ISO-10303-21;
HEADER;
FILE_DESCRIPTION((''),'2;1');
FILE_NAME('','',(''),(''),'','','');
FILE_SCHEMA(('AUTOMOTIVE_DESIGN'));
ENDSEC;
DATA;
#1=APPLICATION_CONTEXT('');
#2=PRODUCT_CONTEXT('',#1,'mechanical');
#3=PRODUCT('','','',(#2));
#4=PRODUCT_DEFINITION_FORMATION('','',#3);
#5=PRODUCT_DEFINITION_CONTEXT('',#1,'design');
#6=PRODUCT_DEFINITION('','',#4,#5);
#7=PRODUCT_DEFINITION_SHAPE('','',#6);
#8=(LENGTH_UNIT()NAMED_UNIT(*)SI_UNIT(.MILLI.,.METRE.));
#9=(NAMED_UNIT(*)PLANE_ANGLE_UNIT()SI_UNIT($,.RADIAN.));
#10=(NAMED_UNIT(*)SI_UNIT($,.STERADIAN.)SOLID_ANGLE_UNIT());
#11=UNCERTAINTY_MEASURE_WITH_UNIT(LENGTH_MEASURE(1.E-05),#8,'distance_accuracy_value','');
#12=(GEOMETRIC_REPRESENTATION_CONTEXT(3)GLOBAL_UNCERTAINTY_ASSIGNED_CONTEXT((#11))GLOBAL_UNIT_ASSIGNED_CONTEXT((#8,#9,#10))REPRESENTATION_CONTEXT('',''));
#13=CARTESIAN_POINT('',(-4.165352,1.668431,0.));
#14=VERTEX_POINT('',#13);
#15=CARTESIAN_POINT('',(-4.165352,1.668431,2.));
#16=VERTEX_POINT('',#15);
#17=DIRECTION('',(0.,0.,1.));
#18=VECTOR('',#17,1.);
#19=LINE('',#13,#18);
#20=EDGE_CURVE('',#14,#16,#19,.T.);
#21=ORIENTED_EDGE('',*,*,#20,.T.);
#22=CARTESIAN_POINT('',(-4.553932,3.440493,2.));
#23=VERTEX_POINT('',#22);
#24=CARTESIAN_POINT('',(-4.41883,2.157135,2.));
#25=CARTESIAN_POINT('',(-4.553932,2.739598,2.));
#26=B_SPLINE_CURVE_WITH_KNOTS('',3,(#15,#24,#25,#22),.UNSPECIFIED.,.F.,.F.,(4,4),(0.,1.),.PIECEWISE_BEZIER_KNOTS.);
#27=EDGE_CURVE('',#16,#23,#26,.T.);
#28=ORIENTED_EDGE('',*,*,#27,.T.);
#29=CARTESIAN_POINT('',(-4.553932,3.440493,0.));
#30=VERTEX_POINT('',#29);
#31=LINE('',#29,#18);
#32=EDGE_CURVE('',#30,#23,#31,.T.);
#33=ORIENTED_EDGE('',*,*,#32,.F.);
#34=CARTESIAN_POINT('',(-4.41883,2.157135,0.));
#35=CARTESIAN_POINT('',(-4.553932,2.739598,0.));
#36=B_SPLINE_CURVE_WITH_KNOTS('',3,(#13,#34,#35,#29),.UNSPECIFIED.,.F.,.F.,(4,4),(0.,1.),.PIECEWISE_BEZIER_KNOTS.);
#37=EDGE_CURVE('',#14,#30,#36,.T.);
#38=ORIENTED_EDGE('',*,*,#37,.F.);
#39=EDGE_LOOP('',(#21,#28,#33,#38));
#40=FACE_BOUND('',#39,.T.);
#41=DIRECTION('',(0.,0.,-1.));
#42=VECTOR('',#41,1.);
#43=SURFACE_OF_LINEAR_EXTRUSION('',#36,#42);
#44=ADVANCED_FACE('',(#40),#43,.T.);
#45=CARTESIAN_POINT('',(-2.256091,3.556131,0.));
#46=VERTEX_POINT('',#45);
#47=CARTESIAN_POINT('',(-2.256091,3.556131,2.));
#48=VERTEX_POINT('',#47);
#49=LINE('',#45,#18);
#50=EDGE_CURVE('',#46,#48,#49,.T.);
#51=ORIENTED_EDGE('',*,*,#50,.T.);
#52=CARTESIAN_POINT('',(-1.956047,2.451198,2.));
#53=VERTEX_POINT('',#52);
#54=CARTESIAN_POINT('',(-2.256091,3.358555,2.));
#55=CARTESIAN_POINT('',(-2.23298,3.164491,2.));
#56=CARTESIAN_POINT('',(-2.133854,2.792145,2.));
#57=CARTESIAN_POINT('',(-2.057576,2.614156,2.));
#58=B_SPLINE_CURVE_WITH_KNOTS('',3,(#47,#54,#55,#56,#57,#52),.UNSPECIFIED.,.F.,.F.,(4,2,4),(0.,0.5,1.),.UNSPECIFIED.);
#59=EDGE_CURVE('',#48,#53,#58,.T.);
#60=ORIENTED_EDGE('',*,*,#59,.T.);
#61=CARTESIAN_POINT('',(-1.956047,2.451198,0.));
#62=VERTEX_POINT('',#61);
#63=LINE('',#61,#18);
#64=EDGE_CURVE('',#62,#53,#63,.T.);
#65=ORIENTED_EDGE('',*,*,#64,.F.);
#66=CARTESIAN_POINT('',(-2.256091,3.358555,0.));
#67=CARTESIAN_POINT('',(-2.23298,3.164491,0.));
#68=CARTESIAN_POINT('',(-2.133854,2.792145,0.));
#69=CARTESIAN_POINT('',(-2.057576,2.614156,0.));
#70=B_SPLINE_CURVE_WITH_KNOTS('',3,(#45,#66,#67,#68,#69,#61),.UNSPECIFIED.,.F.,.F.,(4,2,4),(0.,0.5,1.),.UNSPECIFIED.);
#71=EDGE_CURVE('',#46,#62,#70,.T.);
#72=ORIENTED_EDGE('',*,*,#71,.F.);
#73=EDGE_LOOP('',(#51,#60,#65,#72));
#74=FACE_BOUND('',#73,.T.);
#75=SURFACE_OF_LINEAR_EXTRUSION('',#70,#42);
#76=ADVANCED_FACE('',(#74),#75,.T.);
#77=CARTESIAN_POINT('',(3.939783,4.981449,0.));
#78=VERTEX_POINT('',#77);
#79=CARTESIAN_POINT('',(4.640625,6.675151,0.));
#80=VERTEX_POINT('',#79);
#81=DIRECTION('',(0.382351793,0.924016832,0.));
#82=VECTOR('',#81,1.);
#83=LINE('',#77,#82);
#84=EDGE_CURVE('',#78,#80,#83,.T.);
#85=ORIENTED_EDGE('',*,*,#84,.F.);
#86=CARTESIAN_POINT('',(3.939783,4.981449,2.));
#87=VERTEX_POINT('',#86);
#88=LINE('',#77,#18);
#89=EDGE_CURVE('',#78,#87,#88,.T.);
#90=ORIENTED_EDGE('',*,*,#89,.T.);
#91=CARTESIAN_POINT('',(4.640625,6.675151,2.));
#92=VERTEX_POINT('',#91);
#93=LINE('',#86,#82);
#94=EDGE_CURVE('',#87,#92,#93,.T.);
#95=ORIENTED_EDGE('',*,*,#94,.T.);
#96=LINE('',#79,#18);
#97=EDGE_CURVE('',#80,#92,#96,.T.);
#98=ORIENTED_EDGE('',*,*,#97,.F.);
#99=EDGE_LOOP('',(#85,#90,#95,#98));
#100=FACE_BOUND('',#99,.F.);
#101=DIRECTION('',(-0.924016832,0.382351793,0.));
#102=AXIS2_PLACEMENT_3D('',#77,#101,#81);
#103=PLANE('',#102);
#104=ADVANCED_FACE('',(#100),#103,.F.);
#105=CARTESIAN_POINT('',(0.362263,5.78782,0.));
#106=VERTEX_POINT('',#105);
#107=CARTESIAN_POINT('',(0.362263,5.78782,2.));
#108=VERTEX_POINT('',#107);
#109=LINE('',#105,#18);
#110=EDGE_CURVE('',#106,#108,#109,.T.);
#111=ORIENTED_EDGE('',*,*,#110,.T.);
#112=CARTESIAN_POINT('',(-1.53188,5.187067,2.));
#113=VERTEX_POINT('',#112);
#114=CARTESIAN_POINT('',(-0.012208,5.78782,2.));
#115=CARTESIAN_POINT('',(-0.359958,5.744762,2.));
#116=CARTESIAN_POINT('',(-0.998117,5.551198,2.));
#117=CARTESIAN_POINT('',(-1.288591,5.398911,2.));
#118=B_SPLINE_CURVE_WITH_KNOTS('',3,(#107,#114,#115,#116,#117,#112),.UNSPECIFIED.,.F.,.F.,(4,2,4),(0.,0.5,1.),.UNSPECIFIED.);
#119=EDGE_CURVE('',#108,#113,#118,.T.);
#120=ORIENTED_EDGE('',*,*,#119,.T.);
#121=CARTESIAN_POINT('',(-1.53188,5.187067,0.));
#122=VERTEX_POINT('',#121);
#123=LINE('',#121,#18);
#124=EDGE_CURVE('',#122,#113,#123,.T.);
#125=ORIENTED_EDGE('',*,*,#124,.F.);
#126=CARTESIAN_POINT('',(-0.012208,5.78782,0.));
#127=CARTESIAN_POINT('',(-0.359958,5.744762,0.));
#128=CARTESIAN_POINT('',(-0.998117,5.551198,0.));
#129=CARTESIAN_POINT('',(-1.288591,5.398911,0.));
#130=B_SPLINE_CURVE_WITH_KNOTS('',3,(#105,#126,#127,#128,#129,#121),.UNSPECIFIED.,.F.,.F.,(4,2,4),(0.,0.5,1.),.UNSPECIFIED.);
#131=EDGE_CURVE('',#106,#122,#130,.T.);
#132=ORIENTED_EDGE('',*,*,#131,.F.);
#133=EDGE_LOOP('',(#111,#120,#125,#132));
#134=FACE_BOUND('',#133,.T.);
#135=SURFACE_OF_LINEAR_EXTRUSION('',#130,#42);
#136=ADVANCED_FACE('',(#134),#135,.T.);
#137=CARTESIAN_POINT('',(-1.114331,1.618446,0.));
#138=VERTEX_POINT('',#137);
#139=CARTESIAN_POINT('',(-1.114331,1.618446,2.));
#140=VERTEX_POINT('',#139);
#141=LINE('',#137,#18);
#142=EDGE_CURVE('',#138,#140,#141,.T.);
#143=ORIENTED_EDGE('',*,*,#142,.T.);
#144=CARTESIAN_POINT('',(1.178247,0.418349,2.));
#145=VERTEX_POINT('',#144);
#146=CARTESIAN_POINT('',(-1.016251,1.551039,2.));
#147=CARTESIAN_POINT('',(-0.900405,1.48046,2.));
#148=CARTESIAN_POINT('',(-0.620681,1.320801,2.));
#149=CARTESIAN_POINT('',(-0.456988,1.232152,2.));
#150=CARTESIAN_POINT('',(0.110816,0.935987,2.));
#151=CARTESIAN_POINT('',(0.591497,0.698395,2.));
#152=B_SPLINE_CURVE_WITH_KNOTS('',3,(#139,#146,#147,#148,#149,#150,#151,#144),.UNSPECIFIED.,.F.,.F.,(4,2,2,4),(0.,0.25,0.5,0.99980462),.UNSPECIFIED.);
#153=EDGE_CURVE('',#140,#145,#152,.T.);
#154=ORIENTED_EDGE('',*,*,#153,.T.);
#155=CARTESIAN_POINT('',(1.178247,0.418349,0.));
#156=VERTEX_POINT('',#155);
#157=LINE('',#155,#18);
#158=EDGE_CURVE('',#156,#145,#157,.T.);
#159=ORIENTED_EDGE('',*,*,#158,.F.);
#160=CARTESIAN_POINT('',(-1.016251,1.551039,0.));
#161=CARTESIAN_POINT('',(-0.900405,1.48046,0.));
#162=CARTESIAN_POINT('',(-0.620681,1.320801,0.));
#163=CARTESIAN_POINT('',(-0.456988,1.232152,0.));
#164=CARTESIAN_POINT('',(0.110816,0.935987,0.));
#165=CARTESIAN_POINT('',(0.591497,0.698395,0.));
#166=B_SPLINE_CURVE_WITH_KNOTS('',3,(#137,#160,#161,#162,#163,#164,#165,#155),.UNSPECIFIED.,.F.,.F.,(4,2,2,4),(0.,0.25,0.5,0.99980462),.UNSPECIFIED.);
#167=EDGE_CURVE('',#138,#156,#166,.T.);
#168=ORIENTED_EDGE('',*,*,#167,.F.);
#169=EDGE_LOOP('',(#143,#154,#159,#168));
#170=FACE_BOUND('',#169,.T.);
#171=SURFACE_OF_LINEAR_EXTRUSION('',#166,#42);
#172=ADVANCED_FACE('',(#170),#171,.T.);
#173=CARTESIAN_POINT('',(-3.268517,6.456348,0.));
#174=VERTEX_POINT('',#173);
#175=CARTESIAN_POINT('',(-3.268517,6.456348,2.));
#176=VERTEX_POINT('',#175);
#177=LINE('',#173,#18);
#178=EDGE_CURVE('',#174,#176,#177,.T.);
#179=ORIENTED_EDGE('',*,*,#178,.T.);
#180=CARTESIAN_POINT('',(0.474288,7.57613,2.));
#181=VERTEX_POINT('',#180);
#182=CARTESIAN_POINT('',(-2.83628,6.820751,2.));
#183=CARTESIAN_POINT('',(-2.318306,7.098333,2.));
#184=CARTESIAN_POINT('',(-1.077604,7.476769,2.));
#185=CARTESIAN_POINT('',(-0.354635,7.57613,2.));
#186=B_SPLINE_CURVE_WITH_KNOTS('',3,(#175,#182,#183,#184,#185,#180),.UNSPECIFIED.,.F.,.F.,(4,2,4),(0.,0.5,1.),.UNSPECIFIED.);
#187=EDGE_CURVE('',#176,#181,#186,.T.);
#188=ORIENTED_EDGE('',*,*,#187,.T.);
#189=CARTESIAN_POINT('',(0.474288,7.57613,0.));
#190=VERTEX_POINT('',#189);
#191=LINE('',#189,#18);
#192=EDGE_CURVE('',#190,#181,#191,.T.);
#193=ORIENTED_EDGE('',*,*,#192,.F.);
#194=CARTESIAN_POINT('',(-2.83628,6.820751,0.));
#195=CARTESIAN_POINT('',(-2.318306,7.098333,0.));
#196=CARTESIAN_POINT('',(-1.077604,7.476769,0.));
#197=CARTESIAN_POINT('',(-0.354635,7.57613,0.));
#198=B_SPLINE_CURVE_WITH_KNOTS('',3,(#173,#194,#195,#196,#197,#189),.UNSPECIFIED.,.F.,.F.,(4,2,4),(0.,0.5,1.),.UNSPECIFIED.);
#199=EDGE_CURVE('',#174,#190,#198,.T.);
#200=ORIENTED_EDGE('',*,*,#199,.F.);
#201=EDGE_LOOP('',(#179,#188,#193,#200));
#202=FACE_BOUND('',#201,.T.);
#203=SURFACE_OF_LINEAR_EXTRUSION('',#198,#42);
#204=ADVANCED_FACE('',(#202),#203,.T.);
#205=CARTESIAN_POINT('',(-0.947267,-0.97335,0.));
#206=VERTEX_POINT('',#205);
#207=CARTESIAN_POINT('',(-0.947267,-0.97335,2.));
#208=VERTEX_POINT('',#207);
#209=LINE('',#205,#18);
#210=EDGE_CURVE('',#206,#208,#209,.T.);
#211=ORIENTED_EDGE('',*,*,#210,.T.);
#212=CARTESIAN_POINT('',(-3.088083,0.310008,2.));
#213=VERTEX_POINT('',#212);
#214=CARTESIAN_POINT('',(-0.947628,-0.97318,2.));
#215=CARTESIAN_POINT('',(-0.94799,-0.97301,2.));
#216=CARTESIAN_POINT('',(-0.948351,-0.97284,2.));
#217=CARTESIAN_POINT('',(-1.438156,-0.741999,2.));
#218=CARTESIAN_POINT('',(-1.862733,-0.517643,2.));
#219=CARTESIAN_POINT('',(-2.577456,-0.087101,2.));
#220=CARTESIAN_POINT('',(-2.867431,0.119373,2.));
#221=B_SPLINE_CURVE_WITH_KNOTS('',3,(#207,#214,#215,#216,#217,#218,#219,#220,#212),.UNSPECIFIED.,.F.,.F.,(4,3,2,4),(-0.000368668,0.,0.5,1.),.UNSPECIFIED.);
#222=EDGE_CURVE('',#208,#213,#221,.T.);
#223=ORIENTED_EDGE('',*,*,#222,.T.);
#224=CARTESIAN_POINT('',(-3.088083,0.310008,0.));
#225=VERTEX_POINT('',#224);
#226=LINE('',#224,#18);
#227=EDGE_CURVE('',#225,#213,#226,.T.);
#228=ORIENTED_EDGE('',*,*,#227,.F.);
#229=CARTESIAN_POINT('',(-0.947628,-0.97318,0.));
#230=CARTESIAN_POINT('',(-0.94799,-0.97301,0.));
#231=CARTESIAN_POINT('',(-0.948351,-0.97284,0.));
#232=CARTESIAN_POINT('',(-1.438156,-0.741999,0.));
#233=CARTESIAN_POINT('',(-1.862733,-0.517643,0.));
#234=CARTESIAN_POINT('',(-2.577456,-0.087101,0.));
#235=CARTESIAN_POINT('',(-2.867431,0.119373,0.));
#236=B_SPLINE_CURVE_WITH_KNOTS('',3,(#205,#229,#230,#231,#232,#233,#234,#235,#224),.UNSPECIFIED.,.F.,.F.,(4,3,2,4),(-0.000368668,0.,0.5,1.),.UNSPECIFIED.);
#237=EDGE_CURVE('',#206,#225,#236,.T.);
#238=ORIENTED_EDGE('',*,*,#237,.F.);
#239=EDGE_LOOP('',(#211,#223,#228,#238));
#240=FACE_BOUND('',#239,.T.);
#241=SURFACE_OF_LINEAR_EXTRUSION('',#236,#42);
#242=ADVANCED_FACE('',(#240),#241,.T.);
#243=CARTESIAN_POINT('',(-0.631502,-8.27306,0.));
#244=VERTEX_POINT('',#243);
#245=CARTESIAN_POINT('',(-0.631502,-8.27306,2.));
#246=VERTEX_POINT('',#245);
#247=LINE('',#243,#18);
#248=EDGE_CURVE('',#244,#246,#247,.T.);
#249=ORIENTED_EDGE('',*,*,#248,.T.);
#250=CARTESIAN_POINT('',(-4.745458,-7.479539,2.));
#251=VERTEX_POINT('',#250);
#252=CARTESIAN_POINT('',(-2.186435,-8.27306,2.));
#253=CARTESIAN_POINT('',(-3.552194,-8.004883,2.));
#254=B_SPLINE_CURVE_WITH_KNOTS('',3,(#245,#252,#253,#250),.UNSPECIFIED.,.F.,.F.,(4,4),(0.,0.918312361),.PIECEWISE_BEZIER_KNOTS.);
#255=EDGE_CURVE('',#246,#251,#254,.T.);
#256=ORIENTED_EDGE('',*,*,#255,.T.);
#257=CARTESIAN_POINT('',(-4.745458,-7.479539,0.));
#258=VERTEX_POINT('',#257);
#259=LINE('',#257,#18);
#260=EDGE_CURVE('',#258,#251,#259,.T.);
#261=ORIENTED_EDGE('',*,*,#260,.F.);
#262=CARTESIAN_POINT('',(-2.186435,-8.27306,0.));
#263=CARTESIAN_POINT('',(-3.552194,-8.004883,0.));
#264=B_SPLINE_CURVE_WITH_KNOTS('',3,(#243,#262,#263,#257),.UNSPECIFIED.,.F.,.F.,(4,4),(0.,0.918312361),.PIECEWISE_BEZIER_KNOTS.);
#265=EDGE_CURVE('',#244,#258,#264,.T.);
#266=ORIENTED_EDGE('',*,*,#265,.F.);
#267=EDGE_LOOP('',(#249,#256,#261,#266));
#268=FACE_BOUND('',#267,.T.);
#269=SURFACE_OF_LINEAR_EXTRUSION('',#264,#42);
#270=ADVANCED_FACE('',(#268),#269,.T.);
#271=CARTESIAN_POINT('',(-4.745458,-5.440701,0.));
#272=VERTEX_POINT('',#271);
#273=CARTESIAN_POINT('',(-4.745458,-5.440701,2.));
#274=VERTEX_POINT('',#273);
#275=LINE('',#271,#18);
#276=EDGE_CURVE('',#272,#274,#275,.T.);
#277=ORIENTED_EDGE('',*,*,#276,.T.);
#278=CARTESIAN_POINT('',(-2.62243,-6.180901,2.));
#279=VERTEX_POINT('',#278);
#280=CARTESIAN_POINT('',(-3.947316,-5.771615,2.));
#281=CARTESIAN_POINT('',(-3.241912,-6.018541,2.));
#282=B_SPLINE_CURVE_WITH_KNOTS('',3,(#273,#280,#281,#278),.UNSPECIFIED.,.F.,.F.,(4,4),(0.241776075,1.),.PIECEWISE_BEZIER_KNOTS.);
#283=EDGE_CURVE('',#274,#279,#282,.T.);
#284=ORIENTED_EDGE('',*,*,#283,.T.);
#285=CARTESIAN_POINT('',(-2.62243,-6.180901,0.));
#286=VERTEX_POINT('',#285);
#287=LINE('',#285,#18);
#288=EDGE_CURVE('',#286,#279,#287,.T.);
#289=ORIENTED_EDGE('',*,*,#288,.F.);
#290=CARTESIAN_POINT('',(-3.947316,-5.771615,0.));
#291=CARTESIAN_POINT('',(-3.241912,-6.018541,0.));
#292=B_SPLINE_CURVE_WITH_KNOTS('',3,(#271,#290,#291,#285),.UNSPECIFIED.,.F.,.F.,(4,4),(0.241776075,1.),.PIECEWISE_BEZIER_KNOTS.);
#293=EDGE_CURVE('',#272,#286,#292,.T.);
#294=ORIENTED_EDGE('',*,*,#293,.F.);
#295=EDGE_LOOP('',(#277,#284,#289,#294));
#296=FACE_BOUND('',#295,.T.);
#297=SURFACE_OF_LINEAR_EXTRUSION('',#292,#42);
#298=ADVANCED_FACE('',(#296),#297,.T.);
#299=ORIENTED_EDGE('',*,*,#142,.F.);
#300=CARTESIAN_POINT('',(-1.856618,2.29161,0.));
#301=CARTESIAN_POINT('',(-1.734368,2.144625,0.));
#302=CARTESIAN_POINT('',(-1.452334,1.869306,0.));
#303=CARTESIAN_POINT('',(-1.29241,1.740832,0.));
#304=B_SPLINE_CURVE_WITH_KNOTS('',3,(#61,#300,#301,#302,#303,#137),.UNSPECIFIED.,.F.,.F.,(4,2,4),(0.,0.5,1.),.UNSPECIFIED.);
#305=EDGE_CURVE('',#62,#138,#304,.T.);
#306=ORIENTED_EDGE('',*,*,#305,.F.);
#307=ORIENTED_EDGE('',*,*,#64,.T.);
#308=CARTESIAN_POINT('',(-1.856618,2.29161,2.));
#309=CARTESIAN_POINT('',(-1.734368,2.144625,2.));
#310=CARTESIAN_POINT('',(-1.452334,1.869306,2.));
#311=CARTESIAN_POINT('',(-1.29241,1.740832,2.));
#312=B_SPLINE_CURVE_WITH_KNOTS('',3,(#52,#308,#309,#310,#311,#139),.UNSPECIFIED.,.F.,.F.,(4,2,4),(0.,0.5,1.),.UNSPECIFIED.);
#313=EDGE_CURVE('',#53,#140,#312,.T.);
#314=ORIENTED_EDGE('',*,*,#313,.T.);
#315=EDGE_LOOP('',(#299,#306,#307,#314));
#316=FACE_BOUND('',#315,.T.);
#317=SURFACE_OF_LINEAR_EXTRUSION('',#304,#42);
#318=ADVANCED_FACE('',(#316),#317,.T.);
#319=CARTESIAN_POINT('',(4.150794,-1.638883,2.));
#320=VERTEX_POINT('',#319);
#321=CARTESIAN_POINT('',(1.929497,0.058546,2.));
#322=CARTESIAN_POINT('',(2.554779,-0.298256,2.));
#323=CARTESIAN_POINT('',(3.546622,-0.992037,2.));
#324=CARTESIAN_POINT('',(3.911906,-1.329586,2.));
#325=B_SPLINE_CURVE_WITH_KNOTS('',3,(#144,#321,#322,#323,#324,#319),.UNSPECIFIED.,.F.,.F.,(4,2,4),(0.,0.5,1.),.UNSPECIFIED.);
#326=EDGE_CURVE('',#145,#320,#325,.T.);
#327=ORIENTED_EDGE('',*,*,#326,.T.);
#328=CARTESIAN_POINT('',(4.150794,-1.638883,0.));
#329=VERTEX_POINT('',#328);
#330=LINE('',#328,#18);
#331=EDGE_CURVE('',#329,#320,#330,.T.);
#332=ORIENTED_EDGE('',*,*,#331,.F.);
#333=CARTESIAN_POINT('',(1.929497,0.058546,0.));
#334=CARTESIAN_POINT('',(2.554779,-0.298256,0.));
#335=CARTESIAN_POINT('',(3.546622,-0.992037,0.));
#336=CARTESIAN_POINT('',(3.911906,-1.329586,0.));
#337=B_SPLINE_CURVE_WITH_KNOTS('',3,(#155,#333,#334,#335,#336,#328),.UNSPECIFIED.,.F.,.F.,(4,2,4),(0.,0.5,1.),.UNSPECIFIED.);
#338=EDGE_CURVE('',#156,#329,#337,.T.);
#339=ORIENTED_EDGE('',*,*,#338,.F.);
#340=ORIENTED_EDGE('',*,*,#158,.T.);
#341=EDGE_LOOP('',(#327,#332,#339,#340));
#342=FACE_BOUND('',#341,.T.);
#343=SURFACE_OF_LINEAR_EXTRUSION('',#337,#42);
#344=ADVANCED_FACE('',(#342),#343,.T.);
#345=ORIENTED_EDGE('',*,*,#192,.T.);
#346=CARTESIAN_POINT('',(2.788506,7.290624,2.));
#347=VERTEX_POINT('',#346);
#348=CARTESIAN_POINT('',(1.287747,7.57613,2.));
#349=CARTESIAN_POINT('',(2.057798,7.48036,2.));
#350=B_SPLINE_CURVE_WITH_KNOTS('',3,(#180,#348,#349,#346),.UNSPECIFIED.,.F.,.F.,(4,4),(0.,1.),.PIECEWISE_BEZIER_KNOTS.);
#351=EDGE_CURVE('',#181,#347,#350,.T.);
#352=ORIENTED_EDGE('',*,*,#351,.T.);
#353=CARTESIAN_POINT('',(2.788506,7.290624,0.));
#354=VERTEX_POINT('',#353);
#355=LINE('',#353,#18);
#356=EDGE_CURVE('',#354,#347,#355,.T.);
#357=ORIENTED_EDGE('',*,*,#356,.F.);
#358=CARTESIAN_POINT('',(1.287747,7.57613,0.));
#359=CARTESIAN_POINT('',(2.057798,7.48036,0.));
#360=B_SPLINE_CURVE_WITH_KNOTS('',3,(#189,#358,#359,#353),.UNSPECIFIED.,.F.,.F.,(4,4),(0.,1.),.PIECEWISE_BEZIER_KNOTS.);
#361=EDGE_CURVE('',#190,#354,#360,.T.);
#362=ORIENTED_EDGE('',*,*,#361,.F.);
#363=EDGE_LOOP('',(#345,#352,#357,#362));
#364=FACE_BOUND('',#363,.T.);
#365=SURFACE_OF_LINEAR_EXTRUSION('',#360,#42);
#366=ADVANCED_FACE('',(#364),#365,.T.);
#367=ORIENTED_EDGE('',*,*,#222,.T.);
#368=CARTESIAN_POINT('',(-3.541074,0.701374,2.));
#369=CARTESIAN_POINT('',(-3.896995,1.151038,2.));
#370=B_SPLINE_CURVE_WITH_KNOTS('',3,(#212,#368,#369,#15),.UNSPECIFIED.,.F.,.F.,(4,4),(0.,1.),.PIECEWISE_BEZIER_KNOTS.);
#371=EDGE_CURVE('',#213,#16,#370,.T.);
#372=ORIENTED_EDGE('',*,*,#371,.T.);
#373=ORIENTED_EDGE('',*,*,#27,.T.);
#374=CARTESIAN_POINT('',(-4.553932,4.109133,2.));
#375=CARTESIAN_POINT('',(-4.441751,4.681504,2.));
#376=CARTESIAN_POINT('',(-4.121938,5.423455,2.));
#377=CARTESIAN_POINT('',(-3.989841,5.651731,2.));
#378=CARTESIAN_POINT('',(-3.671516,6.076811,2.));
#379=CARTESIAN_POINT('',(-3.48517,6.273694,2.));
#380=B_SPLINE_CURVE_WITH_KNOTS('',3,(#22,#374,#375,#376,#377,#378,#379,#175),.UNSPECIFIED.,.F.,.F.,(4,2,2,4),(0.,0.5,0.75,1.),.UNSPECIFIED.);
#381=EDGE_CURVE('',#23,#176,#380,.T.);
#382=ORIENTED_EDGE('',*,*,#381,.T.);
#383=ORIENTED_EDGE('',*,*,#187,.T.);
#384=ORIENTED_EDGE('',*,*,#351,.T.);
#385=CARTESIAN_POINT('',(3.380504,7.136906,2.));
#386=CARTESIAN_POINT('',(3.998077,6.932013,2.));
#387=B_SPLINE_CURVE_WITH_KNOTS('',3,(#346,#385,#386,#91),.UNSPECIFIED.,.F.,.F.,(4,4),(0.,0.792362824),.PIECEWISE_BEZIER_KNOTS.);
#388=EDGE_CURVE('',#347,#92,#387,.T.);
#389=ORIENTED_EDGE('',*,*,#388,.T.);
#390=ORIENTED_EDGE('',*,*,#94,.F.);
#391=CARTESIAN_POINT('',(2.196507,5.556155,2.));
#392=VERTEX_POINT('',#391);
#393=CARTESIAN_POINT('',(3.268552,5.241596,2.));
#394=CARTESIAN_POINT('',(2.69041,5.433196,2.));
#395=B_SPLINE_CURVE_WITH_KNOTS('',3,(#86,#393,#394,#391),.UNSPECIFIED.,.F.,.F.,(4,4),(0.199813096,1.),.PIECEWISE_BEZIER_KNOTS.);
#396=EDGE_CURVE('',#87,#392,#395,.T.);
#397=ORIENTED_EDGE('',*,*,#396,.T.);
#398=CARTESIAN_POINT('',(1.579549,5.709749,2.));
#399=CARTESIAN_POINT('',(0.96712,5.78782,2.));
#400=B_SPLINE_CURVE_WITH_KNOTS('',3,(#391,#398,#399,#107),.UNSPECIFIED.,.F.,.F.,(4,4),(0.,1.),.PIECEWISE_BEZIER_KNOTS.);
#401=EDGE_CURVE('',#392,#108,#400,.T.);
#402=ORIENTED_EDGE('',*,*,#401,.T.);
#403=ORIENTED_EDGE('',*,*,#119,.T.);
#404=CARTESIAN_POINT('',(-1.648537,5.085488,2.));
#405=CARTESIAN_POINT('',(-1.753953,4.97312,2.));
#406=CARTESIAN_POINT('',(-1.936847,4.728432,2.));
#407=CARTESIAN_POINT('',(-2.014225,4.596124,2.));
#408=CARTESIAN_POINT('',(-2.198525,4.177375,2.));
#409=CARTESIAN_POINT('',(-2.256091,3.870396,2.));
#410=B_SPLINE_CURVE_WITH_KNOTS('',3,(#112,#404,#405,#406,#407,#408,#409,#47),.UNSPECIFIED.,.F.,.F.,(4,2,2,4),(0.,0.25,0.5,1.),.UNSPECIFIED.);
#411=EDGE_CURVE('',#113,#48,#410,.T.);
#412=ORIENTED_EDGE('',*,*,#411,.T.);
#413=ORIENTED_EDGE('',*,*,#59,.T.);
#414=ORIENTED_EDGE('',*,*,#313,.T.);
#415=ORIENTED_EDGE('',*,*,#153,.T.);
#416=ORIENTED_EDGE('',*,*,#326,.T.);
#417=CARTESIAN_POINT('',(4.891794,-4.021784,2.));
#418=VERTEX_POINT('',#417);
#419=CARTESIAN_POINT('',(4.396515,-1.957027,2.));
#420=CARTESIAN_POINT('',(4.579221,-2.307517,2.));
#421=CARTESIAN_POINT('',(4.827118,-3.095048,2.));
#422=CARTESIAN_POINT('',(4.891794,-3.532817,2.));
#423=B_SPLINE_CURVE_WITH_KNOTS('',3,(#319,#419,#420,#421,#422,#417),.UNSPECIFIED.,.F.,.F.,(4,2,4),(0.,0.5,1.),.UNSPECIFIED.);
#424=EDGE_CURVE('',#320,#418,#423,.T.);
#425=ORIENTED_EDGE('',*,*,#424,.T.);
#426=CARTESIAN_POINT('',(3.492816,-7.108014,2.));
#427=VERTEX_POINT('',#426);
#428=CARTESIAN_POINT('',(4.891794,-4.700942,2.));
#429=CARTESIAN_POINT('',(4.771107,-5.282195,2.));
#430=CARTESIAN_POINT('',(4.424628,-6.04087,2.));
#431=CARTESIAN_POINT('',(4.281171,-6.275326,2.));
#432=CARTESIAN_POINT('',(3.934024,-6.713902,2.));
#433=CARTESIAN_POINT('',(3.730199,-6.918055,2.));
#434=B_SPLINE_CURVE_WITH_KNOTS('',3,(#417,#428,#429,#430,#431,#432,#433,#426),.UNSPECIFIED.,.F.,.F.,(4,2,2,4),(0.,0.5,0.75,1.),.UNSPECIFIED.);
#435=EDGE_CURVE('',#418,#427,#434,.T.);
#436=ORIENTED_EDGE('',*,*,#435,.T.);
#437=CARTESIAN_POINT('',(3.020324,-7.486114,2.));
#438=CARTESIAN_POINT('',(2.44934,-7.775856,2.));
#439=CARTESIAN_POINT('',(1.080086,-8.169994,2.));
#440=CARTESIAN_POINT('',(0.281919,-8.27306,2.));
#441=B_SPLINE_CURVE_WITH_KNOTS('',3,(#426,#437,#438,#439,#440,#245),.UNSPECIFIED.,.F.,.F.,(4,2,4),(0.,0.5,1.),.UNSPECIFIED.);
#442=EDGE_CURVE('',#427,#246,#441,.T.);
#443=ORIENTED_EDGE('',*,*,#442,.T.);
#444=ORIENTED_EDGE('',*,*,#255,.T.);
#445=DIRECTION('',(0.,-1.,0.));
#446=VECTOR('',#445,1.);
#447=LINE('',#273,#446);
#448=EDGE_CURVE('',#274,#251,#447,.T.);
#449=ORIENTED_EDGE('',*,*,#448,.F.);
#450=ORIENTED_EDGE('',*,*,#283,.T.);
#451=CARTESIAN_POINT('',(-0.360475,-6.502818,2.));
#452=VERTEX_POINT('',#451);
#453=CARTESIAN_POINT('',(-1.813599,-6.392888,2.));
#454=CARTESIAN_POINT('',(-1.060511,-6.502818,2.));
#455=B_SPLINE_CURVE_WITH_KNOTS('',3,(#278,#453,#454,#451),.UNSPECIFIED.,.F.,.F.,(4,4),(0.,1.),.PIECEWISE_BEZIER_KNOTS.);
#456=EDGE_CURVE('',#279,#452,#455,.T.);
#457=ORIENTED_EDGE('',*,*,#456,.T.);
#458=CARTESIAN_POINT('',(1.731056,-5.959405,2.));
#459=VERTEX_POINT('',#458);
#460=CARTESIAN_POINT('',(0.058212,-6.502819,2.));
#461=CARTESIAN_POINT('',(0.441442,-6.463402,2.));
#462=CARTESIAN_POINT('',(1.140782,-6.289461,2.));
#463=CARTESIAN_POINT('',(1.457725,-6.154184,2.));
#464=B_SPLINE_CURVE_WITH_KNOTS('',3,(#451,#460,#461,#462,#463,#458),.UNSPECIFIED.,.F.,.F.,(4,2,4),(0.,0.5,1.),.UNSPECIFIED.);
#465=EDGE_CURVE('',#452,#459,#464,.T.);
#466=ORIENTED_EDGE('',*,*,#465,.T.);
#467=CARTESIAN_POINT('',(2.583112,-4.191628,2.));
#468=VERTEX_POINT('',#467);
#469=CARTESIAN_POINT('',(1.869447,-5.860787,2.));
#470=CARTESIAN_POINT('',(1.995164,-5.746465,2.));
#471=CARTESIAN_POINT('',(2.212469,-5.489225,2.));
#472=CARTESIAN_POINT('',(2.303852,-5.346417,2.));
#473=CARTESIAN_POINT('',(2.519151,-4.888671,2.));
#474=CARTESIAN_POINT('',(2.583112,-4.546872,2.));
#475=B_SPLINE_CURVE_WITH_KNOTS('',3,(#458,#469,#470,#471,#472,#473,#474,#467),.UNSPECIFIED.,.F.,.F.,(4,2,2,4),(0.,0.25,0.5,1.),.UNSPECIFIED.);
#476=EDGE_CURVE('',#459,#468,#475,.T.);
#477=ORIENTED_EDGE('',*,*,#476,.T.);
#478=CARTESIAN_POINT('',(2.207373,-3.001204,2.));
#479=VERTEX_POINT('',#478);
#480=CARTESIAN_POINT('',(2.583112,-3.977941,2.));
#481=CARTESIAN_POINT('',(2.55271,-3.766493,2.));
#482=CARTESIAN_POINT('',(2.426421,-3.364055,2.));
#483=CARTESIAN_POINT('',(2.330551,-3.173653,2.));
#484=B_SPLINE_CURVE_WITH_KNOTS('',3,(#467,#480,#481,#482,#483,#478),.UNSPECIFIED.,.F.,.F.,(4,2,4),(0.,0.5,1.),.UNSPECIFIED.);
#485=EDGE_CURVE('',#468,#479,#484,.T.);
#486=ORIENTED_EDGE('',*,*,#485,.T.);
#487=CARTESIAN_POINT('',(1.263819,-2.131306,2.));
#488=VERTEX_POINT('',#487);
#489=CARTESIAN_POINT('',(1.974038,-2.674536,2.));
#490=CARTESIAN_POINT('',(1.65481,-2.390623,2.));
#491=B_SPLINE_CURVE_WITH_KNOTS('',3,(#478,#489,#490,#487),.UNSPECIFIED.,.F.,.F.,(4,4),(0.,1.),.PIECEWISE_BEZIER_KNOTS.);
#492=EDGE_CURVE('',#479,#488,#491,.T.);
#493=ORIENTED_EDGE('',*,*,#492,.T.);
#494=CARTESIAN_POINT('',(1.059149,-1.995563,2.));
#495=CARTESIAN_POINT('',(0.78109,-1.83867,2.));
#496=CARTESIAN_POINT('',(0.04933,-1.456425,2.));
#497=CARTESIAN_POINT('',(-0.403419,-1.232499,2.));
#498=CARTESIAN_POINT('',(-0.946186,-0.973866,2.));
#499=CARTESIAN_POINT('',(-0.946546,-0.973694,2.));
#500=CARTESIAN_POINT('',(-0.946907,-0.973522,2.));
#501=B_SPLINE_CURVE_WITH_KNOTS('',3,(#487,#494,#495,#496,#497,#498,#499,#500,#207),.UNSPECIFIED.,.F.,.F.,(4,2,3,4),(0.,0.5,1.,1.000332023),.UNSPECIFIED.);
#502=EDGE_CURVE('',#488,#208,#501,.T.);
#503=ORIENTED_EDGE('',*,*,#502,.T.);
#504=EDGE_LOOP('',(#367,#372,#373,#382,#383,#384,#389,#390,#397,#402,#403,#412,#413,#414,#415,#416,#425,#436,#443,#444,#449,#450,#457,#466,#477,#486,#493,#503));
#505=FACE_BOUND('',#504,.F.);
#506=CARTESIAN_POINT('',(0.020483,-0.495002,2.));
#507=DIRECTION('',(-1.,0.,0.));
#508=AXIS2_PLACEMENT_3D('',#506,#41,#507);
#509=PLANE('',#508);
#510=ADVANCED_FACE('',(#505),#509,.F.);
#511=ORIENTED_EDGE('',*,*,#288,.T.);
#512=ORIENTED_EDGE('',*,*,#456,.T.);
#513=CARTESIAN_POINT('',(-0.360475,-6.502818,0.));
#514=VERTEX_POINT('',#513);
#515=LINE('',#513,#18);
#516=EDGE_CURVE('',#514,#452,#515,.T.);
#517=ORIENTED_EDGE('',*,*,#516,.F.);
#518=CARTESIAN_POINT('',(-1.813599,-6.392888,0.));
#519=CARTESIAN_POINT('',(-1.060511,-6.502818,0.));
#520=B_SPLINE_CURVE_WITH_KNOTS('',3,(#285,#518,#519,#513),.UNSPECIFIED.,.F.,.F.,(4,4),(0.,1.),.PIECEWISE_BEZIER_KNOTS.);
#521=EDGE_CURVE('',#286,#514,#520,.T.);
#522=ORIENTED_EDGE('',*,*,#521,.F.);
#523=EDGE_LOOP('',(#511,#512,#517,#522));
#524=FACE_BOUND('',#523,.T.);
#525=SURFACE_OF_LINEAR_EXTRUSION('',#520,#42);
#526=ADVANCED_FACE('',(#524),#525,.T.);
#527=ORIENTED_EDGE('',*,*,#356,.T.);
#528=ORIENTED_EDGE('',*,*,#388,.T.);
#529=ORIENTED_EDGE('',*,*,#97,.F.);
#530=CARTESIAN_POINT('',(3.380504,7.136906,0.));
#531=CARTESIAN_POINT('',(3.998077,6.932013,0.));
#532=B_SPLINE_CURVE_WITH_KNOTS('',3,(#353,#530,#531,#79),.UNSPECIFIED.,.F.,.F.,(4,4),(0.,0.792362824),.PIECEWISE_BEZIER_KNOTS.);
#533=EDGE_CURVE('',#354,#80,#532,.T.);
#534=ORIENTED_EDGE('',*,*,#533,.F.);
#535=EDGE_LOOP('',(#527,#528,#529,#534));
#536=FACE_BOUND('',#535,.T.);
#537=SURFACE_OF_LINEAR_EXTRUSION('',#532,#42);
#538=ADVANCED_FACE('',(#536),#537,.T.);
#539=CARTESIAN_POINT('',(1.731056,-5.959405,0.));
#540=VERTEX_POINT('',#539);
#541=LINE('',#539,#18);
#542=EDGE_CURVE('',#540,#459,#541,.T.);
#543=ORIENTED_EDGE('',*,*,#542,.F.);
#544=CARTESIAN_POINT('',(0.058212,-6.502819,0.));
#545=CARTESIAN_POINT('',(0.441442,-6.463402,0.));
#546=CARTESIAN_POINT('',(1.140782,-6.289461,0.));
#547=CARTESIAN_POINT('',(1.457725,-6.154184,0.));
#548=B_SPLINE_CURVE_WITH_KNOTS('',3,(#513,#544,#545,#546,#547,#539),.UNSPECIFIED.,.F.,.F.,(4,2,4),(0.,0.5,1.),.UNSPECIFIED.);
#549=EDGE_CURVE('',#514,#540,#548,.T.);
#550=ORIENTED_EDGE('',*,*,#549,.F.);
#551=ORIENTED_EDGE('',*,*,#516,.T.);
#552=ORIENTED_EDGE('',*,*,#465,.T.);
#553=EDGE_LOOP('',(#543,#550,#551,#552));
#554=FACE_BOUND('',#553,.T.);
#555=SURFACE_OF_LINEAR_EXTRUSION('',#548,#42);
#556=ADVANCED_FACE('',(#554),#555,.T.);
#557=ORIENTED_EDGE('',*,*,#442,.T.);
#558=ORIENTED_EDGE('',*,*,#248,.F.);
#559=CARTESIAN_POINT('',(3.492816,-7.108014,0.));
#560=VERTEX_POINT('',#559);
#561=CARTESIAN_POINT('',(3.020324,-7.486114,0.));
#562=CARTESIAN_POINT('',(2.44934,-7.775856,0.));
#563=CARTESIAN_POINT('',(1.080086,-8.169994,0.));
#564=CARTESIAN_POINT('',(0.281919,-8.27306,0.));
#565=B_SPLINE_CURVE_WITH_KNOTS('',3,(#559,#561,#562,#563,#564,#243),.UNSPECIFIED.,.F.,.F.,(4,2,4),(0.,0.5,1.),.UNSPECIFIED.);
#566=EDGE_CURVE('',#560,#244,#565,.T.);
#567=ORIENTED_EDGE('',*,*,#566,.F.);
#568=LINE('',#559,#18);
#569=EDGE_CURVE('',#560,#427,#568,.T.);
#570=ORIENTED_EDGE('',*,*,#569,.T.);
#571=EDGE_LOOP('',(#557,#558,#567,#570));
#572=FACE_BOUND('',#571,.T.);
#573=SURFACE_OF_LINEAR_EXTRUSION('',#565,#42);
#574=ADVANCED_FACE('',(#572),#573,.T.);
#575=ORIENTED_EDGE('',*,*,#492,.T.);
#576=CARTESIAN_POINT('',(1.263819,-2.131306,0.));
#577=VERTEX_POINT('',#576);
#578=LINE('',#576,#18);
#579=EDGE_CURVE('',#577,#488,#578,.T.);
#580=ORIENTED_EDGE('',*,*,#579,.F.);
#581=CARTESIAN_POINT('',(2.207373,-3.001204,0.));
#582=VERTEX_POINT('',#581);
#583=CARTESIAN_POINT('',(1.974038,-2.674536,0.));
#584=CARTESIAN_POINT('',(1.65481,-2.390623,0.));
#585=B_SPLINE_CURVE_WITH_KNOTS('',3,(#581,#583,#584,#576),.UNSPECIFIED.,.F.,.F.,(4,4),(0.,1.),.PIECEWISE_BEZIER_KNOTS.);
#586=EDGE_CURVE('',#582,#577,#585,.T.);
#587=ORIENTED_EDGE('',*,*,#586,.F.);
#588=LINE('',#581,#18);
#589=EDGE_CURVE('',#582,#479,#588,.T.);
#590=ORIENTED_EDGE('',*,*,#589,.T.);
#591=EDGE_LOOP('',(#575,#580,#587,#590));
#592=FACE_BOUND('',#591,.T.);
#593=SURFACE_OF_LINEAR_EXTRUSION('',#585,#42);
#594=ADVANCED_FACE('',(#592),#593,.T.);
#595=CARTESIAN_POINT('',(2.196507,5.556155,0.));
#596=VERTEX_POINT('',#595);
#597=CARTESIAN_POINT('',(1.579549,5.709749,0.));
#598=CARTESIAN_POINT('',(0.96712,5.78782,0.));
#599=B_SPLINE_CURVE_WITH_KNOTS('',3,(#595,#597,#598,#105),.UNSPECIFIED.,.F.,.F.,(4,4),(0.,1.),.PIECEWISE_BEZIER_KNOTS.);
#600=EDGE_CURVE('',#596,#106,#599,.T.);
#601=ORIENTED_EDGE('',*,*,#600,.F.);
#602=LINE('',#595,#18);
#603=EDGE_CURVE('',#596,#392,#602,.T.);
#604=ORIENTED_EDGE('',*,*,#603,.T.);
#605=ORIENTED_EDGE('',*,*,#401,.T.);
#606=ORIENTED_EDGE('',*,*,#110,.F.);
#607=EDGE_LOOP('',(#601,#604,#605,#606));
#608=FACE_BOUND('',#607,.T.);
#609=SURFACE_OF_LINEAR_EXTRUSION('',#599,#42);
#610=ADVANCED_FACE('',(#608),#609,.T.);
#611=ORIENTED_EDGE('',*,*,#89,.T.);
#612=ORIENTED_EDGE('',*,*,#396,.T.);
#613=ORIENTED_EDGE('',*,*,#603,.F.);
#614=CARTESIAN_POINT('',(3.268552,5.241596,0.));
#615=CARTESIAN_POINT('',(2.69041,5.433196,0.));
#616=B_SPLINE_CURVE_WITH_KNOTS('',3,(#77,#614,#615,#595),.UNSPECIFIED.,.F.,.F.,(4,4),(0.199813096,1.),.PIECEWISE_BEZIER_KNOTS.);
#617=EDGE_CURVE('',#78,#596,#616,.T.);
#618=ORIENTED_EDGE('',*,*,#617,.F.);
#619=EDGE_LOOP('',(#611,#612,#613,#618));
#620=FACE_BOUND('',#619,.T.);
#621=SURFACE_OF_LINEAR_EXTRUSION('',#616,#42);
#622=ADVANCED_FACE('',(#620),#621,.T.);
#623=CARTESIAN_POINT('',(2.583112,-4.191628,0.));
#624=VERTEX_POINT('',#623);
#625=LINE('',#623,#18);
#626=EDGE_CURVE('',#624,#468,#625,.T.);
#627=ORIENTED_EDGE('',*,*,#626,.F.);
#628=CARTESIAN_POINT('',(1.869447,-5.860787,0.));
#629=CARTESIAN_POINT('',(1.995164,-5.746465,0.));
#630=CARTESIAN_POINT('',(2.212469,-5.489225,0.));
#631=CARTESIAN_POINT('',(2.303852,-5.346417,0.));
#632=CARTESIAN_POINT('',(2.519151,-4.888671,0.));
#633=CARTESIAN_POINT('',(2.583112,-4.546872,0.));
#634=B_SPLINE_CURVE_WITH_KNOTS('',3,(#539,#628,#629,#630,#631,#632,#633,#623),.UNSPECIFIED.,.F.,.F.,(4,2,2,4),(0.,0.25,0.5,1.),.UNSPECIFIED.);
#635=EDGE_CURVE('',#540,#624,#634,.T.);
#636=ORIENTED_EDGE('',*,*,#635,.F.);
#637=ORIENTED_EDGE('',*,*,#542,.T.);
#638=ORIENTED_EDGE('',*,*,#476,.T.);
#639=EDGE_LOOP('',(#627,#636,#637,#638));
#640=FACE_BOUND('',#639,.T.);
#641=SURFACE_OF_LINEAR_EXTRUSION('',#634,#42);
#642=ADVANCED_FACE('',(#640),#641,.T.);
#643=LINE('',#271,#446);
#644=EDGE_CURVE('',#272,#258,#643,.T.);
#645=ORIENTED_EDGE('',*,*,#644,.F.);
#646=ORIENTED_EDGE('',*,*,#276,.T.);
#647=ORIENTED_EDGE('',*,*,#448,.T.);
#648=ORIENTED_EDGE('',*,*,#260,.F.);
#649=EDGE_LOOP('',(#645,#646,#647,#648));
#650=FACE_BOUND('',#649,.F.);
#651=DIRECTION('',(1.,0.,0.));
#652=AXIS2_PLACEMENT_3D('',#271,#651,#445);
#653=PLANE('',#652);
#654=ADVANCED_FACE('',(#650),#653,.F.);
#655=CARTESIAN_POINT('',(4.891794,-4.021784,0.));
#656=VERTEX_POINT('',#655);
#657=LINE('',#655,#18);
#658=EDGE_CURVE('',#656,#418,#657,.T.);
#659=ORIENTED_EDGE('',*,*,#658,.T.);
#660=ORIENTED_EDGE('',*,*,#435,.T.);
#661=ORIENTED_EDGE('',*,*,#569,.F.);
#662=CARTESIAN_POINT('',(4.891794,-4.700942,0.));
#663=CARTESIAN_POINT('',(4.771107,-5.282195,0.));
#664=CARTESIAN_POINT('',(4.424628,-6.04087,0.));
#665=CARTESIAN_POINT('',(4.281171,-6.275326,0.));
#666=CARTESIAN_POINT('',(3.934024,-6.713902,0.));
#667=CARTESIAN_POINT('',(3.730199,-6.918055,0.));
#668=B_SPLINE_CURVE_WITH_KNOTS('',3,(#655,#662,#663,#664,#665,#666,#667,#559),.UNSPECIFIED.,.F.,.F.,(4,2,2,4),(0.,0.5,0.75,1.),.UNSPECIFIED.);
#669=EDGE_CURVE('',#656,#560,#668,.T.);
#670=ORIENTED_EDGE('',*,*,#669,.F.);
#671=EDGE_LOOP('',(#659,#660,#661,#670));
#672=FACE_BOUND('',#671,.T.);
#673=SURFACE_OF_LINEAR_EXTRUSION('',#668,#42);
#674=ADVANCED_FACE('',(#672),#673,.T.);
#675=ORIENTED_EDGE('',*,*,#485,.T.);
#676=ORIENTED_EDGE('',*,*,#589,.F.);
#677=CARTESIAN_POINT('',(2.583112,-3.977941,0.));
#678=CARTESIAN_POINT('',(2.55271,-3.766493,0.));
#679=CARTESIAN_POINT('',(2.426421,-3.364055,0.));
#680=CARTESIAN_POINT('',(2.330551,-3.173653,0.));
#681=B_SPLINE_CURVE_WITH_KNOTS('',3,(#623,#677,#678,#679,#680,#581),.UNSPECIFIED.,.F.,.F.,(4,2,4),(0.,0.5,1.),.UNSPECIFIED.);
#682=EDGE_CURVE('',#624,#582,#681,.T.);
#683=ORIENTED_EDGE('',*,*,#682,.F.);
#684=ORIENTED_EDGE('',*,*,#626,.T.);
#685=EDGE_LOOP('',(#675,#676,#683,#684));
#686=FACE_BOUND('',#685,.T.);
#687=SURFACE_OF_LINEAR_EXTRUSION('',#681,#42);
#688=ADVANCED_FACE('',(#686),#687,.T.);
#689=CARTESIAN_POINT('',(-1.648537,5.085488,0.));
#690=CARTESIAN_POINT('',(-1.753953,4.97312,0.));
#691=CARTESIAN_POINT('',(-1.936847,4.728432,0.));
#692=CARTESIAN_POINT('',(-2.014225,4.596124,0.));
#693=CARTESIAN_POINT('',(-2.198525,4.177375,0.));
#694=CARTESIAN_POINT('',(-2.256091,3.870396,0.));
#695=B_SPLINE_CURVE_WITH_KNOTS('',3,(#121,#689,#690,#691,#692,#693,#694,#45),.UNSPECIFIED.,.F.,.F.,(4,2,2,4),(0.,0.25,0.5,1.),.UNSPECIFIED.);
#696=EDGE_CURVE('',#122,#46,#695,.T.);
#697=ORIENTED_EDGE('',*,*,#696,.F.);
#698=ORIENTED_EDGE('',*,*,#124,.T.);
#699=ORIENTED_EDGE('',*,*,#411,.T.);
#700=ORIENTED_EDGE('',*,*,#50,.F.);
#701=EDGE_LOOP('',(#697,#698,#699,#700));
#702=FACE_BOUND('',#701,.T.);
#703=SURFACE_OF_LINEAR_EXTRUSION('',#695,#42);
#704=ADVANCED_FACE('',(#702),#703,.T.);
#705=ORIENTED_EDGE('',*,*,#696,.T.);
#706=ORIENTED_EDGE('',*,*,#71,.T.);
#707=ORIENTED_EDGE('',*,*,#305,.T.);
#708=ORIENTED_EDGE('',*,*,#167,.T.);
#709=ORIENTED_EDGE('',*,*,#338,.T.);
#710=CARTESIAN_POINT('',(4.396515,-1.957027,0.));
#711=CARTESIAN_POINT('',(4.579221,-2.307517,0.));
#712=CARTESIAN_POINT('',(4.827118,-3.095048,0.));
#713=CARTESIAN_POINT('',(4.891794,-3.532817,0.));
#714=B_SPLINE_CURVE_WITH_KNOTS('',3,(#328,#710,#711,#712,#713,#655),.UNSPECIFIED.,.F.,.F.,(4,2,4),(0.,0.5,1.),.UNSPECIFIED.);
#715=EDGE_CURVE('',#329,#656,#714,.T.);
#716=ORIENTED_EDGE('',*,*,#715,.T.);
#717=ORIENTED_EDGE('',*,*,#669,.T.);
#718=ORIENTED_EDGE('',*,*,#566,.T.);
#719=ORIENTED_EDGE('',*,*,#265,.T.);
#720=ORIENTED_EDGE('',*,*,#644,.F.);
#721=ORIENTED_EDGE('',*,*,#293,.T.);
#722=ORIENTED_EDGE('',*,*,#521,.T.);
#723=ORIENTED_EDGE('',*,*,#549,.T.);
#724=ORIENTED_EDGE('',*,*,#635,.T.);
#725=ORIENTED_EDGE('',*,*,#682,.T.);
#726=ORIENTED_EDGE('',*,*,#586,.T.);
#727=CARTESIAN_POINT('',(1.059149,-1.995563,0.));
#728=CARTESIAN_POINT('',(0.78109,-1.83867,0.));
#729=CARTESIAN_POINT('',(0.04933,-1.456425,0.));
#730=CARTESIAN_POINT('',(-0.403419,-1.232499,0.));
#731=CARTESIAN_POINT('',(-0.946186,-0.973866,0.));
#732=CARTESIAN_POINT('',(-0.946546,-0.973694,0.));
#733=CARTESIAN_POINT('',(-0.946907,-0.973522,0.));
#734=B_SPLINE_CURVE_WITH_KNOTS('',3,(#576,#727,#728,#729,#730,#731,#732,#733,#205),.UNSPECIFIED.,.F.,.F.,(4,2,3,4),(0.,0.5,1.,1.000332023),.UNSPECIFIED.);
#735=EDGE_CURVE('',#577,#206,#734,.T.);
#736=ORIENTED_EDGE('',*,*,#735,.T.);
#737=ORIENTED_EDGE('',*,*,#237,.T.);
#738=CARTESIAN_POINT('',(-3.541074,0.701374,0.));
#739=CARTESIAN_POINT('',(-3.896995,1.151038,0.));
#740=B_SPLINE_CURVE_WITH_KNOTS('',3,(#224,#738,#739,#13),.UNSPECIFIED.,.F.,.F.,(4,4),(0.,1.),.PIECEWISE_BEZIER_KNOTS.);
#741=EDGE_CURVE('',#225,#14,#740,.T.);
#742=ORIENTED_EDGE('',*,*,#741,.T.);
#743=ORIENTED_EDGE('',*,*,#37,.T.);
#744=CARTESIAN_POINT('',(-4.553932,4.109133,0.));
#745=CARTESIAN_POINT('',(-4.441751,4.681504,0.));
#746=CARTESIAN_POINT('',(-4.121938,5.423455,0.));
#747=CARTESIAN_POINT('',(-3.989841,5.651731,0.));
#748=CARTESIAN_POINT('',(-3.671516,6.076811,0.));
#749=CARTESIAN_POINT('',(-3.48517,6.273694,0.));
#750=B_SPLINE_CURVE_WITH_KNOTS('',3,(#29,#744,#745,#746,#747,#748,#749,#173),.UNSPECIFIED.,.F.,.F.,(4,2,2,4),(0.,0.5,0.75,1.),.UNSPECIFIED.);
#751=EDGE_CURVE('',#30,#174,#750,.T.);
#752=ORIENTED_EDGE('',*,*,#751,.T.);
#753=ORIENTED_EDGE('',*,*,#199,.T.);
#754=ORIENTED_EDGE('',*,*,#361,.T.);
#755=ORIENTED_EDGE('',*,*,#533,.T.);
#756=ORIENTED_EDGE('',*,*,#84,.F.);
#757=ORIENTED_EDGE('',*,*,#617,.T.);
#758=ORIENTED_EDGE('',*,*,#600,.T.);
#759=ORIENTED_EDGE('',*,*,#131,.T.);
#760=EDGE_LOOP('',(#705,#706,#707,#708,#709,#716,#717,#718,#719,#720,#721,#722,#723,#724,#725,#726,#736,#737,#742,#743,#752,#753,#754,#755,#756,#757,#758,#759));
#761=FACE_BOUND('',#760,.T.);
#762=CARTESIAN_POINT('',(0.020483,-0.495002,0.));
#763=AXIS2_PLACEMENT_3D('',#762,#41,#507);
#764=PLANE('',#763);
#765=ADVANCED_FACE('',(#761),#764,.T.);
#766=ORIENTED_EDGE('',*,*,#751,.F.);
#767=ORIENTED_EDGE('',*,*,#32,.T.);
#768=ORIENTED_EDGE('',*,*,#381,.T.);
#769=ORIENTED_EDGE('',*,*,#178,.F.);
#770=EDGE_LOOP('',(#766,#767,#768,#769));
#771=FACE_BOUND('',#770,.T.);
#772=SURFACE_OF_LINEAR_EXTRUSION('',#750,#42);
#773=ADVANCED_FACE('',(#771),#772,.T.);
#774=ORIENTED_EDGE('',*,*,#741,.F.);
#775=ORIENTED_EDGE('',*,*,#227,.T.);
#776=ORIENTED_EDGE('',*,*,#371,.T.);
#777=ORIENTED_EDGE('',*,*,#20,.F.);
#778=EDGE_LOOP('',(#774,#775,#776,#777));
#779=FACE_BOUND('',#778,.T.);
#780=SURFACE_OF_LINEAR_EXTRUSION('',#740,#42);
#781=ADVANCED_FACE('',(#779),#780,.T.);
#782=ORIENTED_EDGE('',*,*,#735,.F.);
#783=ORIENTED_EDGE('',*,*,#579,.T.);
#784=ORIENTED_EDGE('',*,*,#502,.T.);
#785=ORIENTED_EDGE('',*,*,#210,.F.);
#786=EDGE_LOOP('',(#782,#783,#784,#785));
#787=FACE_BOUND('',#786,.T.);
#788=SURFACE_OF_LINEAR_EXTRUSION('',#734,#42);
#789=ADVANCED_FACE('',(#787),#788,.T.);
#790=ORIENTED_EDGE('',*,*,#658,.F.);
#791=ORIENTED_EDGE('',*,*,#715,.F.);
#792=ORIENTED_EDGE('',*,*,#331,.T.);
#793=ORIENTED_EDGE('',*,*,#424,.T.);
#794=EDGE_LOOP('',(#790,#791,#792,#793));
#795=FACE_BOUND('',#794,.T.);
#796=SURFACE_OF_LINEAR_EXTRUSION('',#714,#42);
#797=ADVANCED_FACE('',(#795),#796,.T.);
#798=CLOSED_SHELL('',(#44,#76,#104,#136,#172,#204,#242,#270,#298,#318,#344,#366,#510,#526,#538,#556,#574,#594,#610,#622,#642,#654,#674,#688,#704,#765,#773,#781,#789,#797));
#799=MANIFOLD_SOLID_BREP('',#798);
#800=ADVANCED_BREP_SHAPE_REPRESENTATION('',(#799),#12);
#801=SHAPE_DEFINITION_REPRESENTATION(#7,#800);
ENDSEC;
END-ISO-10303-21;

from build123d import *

# Parameters (mm, degrees)
F1_DEPTH = 2


# Not quite as in the source:
# - ends of sketch curves that miss each other by under 0.0002 mm in the source are joined
# - the dataset's text gives a spline's control points without its knots; the knots are read off the source's solid


with BuildPart() as f1:
    # F0 (on Top) → F1 (new body)
    with BuildSketch(Plane.XY):
        with BuildLine():
            add(Edge.make_bspline(
                [(-4.5539323159, 3.4404925622), (-4.553932314, 4.109133441), (-4.4417509068, 4.6815041688), (-4.121937897, 5.4234547922), (-3.9898413305, 5.6517314099), (-3.6715155244, 6.0768112467), (-3.4851703783, 6.273694276), (-3.2685167558, 6.4563475141)],
                knots=[0, 0, 0, 0, 0.5, 0.5, 0.75, 0.75, 1, 1, 1, 1], degree=3))
            add(Edge.make_bspline(
                [(-4.1653522884, 1.6684308192), (-4.4188295054, 2.1571348906), (-4.5539323132, 2.7395984093), (-4.5539323159, 3.4404925622)],
                knots=[0, 0, 0, 0, 1, 1, 1, 1], degree=3))
            add(Edge.make_bspline(
                [(-3.0880831784, 0.3100080442), (-3.5410735232, 0.7013744056), (-3.8969951229, 1.1510382057), (-4.1653522884, 1.6684308192)],
                knots=[0, 0, 0, 0, 1, 1, 1, 1], degree=3))
            add(Edge.make_bspline(
                [(-0.94726724, -0.9733503247), (-0.9476283907, -0.9731801173), (-0.9479895414, -0.9730099099), (-0.948350692, -0.9728397025), (-1.4381555261, -0.7419986681), (-1.8627330629, -0.5176434714), (-2.5774559291, -0.0871012519), (-2.8674308006, 0.1193728081), (-3.0880831784, 0.3100080442)],
                knots=[-0.0003686679, -0.0003686679, -0.0003686679, -0.0003686679, 0, 0, 0, 0.5, 0.5, 1, 1, 1, 1], degree=3))
            add(Edge.make_bspline(
                [(1.2638188496, -2.1313058458), (1.0591492674, -1.9955628295), (0.7810896534, -1.8386696922), (0.0493295513, -1.4564253852), (-0.4034193402, -1.2324993239), (-0.9461859739, -0.9738655589), (-0.9465463959, -0.9736938141), (-0.946906818, -0.9735220694), (-0.94726724, -0.9733503247)],
                knots=[0, 0, 0, 0, 0.5, 0.5, 1, 1, 1, 1.000332023, 1.000332023, 1.000332023, 1.000332023], degree=3))
            add(Edge.make_bspline(
                [(2.2073726786, -3.0012041242), (1.9740381312, -2.6745358034), (1.654810322, -2.3906232081), (1.2638188496, -2.1313058458)],
                knots=[0, 0, 0, 0, 1, 1, 1, 1], degree=3))
            add(Edge.make_bspline(
                [(2.5831118874, -4.1916276187), (2.5831119009, -3.9779409831), (2.5527095247, -3.7664931745), (2.4264212856, -3.3640546657), (2.3305505576, -3.173653134), (2.2073726786, -3.0012041242)],
                knots=[0, 0, 0, 0, 0.5, 0.5, 1, 1, 1, 1], degree=3))
            add(Edge.make_bspline(
                [(1.7310564521, -5.9594051259), (1.8694470021, -5.8607866548), (1.9951638757, -5.7464648732), (2.2124688094, -5.4892251058), (2.3038523063, -5.3464167266), (2.519150799, -4.8886706939), (2.5831119027, -4.5468724456), (2.5831118874, -4.1916276187)],
                knots=[0, 0, 0, 0, 0.25, 0.25, 0.5, 0.5, 1, 1, 1, 1], degree=3))
            add(Edge.make_bspline(
                [(-0.3604753147, -6.502818499), (0.0582122658, -6.5028185014), (0.4414416098, -6.4634017893), (1.1407820285, -6.2894614297), (1.4577253675, -6.1541835635), (1.7310564521, -5.9594051259)],
                knots=[0, 0, 0, 0, 0.5, 0.5, 1, 1, 1, 1], degree=3))
            add(Edge.make_bspline(
                [(-2.6224302874, -6.1809013634), (-1.8135993387, -6.3928882585), (-1.0605109021, -6.5028184969), (-0.3604753147, -6.502818499)],
                knots=[0, 0, 0, 0, 1, 1, 1, 1], degree=3))
            add(Edge.make_bspline(
                [(-4.7454580591, -5.4407007971), (-3.9473161615, -5.7716151358), (-3.2419123285, -6.018541014), (-2.6224302874, -6.1809013634)],
                knots=[0.2417760748, 0.2417760748, 0.2417760748, 0.2417760748, 1, 1, 1, 1], degree=3))
            Line((-4.7454580591, -5.4407007971), (-4.7454580591, -7.4795386684))
            add(Edge.make_bspline(
                [(-0.6315023097, -8.2730601286), (-2.1864345754, -8.2730601282), (-3.5521940185, -8.0048830709), (-4.7454580591, -7.4795386684)],
                knots=[0, 0, 0, 0, 0.9183123613, 0.9183123613, 0.9183123613, 0.9183123613], degree=3))
            add(Edge.make_bspline(
                [(3.4928160756, -7.1080140655), (3.0203241877, -7.4861136355), (2.4493404192, -7.7758563937), (1.0800859896, -8.1699938198), (0.2819186052, -8.2730601281), (-0.6315023097, -8.2730601286)],
                knots=[0, 0, 0, 0, 0.5, 0.5, 1, 1, 1, 1], degree=3))
            add(Edge.make_bspline(
                [(4.8917938139, -4.0217840352), (4.8917938118, -4.7009415685), (4.7711067522, -5.2821953174), (4.4246282935, -6.0408703732), (4.2811707681, -6.2753258521), (3.9340237801, -6.7139024983), (3.7301988047, -6.918054596), (3.4928160756, -7.1080140655)],
                knots=[0, 0, 0, 0, 0.5, 0.5, 0.75, 0.75, 1, 1, 1, 1], degree=3))
            add(Edge.make_bspline(
                [(4.1507940458, -1.638882878), (4.396515413, -1.9570273867), (4.5792206673, -2.30751695), (4.827118095, -3.0950479417), (4.8917938123, -3.5328168935), (4.8917938139, -4.0217840352)],
                knots=[0, 0, 0, 0, 0.5, 0.5, 1, 1, 1, 1], degree=3))
            add(Edge.make_bspline(
                [(1.1782471579, 0.4183491959), (1.9294970419, 0.0585462091), (2.5547792836, -0.2982557111), (3.5466215561, -0.992037242), (3.9119064629, -1.3295863067), (4.1507940458, -1.638882878)],
                knots=[0, 0, 0, 0, 0.5, 0.5, 1, 1, 1, 1], degree=3))
            add(Edge.make_bspline(
                [(-1.1143311666, 1.6184455474), (-1.0162509018, 1.5510390918), (-0.9004048855, 1.4804604262), (-0.6206808382, 1.3208013117), (-0.45698794, 1.2321520315), (0.1108160421, 0.9359869549), (0.5914968065, 0.6983949543), (1.1782471579, 0.4183491959)],
                knots=[0, 0, 0, 0, 0.25, 0.25, 0.5, 0.5, 0.9998046197, 0.9998046197, 0.9998046197, 0.9998046197], degree=3))
            add(Edge.make_bspline(
                [(-1.9560474883, 2.451198266), (-1.8566181148, 2.2916099906), (-1.7343676506, 2.1446246375), (-1.4523338231, 1.8693058849), (-1.2924097348, 1.7408315854), (-1.1143311666, 1.6184455474)],
                knots=[0, 0, 0, 0, 0.5, 0.5, 1, 1, 1, 1], degree=3))
            add(Edge.make_bspline(
                [(-2.2560914692, 3.5561307467), (-2.2560914812, 3.358554546), (-2.232979569, 3.1644905564), (-2.1338539681, 2.7921448588), (-2.0575762287, 2.6141561535), (-1.9560474883, 2.451198266)],
                knots=[0, 0, 0, 0, 0.5, 0.5, 1, 1, 1, 1], degree=3))
            add(Edge.make_bspline(
                [(-1.5318803699, 5.1870673998), (-1.6485374043, 5.0854884976), (-1.7539534558, 4.9731201094), (-1.9368474168, 4.7284320339), (-2.0142254381, 4.5961241937), (-2.1985253422, 4.1773747627), (-2.2560914855, 3.8703955411), (-2.2560914692, 3.5561307467)],
                knots=[0, 0, 0, 0, 0.25, 0.25, 0.5, 0.5, 1, 1, 1, 1], degree=3))
            add(Edge.make_bspline(
                [(0.3622633388, 5.7878203751), (-0.012208003, 5.7878203799), (-0.3599577221, 5.7447623809), (-0.9981166165, 5.5511975822), (-1.2885907071, 5.398911453), (-1.5318803699, 5.1870673998)],
                knots=[0, 0, 0, 0, 0.5, 0.5, 1, 1, 1, 1], degree=3))
            add(Edge.make_bspline(
                [(2.1965066912, 5.556154833), (1.5795493196, 5.7097488235), (0.967120358, 5.7878203748), (0.3622633388, 5.7878203751)],
                knots=[0, 0, 0, 0, 1, 1, 1, 1], degree=3))
            add(Edge.make_bspline(
                [(3.9397827582, 4.9814492737), (3.2685520169, 5.2415958191), (2.6904101659, 5.4331955967), (2.1965066912, 5.556154833)],
                knots=[0.1998130955, 0.1998130955, 0.1998130955, 0.1998130955, 1, 1, 1, 1], degree=3))
            Line((3.9397827582, 4.9814492737), (4.6406248453, 6.6751509842))
            add(Edge.make_bspline(
                [(2.7885063884, 7.2906242127), (3.380503744, 7.1369061979), (3.9980767952, 6.9320131673), (4.6406248453, 6.6751509842)],
                knots=[0, 0, 0, 0, 0.7923628244, 0.7923628244, 0.7923628244, 0.7923628244], degree=3))
            add(Edge.make_bspline(
                [(0.4742878301, 7.5761304711), (1.2877472267, 7.5761304708), (2.0577984223, 7.4803598207), (2.7885063884, 7.2906242127)],
                knots=[0, 0, 0, 0, 1, 1, 1, 1], degree=3))
            add(Edge.make_bspline(
                [(-3.2685167558, 6.4563475141), (-2.836280375, 6.8207511786), (-2.3183058122, 7.0983331165), (-1.0776039847, 7.4767690155), (-0.3546345611, 7.5761304704), (0.4742878301, 7.5761304711)],
                knots=[0, 0, 0, 0, 0.5, 0.5, 1, 1, 1, 1], degree=3))
        make_face()
    extrude(amount=F1_DEPTH)


solid = f1.part
